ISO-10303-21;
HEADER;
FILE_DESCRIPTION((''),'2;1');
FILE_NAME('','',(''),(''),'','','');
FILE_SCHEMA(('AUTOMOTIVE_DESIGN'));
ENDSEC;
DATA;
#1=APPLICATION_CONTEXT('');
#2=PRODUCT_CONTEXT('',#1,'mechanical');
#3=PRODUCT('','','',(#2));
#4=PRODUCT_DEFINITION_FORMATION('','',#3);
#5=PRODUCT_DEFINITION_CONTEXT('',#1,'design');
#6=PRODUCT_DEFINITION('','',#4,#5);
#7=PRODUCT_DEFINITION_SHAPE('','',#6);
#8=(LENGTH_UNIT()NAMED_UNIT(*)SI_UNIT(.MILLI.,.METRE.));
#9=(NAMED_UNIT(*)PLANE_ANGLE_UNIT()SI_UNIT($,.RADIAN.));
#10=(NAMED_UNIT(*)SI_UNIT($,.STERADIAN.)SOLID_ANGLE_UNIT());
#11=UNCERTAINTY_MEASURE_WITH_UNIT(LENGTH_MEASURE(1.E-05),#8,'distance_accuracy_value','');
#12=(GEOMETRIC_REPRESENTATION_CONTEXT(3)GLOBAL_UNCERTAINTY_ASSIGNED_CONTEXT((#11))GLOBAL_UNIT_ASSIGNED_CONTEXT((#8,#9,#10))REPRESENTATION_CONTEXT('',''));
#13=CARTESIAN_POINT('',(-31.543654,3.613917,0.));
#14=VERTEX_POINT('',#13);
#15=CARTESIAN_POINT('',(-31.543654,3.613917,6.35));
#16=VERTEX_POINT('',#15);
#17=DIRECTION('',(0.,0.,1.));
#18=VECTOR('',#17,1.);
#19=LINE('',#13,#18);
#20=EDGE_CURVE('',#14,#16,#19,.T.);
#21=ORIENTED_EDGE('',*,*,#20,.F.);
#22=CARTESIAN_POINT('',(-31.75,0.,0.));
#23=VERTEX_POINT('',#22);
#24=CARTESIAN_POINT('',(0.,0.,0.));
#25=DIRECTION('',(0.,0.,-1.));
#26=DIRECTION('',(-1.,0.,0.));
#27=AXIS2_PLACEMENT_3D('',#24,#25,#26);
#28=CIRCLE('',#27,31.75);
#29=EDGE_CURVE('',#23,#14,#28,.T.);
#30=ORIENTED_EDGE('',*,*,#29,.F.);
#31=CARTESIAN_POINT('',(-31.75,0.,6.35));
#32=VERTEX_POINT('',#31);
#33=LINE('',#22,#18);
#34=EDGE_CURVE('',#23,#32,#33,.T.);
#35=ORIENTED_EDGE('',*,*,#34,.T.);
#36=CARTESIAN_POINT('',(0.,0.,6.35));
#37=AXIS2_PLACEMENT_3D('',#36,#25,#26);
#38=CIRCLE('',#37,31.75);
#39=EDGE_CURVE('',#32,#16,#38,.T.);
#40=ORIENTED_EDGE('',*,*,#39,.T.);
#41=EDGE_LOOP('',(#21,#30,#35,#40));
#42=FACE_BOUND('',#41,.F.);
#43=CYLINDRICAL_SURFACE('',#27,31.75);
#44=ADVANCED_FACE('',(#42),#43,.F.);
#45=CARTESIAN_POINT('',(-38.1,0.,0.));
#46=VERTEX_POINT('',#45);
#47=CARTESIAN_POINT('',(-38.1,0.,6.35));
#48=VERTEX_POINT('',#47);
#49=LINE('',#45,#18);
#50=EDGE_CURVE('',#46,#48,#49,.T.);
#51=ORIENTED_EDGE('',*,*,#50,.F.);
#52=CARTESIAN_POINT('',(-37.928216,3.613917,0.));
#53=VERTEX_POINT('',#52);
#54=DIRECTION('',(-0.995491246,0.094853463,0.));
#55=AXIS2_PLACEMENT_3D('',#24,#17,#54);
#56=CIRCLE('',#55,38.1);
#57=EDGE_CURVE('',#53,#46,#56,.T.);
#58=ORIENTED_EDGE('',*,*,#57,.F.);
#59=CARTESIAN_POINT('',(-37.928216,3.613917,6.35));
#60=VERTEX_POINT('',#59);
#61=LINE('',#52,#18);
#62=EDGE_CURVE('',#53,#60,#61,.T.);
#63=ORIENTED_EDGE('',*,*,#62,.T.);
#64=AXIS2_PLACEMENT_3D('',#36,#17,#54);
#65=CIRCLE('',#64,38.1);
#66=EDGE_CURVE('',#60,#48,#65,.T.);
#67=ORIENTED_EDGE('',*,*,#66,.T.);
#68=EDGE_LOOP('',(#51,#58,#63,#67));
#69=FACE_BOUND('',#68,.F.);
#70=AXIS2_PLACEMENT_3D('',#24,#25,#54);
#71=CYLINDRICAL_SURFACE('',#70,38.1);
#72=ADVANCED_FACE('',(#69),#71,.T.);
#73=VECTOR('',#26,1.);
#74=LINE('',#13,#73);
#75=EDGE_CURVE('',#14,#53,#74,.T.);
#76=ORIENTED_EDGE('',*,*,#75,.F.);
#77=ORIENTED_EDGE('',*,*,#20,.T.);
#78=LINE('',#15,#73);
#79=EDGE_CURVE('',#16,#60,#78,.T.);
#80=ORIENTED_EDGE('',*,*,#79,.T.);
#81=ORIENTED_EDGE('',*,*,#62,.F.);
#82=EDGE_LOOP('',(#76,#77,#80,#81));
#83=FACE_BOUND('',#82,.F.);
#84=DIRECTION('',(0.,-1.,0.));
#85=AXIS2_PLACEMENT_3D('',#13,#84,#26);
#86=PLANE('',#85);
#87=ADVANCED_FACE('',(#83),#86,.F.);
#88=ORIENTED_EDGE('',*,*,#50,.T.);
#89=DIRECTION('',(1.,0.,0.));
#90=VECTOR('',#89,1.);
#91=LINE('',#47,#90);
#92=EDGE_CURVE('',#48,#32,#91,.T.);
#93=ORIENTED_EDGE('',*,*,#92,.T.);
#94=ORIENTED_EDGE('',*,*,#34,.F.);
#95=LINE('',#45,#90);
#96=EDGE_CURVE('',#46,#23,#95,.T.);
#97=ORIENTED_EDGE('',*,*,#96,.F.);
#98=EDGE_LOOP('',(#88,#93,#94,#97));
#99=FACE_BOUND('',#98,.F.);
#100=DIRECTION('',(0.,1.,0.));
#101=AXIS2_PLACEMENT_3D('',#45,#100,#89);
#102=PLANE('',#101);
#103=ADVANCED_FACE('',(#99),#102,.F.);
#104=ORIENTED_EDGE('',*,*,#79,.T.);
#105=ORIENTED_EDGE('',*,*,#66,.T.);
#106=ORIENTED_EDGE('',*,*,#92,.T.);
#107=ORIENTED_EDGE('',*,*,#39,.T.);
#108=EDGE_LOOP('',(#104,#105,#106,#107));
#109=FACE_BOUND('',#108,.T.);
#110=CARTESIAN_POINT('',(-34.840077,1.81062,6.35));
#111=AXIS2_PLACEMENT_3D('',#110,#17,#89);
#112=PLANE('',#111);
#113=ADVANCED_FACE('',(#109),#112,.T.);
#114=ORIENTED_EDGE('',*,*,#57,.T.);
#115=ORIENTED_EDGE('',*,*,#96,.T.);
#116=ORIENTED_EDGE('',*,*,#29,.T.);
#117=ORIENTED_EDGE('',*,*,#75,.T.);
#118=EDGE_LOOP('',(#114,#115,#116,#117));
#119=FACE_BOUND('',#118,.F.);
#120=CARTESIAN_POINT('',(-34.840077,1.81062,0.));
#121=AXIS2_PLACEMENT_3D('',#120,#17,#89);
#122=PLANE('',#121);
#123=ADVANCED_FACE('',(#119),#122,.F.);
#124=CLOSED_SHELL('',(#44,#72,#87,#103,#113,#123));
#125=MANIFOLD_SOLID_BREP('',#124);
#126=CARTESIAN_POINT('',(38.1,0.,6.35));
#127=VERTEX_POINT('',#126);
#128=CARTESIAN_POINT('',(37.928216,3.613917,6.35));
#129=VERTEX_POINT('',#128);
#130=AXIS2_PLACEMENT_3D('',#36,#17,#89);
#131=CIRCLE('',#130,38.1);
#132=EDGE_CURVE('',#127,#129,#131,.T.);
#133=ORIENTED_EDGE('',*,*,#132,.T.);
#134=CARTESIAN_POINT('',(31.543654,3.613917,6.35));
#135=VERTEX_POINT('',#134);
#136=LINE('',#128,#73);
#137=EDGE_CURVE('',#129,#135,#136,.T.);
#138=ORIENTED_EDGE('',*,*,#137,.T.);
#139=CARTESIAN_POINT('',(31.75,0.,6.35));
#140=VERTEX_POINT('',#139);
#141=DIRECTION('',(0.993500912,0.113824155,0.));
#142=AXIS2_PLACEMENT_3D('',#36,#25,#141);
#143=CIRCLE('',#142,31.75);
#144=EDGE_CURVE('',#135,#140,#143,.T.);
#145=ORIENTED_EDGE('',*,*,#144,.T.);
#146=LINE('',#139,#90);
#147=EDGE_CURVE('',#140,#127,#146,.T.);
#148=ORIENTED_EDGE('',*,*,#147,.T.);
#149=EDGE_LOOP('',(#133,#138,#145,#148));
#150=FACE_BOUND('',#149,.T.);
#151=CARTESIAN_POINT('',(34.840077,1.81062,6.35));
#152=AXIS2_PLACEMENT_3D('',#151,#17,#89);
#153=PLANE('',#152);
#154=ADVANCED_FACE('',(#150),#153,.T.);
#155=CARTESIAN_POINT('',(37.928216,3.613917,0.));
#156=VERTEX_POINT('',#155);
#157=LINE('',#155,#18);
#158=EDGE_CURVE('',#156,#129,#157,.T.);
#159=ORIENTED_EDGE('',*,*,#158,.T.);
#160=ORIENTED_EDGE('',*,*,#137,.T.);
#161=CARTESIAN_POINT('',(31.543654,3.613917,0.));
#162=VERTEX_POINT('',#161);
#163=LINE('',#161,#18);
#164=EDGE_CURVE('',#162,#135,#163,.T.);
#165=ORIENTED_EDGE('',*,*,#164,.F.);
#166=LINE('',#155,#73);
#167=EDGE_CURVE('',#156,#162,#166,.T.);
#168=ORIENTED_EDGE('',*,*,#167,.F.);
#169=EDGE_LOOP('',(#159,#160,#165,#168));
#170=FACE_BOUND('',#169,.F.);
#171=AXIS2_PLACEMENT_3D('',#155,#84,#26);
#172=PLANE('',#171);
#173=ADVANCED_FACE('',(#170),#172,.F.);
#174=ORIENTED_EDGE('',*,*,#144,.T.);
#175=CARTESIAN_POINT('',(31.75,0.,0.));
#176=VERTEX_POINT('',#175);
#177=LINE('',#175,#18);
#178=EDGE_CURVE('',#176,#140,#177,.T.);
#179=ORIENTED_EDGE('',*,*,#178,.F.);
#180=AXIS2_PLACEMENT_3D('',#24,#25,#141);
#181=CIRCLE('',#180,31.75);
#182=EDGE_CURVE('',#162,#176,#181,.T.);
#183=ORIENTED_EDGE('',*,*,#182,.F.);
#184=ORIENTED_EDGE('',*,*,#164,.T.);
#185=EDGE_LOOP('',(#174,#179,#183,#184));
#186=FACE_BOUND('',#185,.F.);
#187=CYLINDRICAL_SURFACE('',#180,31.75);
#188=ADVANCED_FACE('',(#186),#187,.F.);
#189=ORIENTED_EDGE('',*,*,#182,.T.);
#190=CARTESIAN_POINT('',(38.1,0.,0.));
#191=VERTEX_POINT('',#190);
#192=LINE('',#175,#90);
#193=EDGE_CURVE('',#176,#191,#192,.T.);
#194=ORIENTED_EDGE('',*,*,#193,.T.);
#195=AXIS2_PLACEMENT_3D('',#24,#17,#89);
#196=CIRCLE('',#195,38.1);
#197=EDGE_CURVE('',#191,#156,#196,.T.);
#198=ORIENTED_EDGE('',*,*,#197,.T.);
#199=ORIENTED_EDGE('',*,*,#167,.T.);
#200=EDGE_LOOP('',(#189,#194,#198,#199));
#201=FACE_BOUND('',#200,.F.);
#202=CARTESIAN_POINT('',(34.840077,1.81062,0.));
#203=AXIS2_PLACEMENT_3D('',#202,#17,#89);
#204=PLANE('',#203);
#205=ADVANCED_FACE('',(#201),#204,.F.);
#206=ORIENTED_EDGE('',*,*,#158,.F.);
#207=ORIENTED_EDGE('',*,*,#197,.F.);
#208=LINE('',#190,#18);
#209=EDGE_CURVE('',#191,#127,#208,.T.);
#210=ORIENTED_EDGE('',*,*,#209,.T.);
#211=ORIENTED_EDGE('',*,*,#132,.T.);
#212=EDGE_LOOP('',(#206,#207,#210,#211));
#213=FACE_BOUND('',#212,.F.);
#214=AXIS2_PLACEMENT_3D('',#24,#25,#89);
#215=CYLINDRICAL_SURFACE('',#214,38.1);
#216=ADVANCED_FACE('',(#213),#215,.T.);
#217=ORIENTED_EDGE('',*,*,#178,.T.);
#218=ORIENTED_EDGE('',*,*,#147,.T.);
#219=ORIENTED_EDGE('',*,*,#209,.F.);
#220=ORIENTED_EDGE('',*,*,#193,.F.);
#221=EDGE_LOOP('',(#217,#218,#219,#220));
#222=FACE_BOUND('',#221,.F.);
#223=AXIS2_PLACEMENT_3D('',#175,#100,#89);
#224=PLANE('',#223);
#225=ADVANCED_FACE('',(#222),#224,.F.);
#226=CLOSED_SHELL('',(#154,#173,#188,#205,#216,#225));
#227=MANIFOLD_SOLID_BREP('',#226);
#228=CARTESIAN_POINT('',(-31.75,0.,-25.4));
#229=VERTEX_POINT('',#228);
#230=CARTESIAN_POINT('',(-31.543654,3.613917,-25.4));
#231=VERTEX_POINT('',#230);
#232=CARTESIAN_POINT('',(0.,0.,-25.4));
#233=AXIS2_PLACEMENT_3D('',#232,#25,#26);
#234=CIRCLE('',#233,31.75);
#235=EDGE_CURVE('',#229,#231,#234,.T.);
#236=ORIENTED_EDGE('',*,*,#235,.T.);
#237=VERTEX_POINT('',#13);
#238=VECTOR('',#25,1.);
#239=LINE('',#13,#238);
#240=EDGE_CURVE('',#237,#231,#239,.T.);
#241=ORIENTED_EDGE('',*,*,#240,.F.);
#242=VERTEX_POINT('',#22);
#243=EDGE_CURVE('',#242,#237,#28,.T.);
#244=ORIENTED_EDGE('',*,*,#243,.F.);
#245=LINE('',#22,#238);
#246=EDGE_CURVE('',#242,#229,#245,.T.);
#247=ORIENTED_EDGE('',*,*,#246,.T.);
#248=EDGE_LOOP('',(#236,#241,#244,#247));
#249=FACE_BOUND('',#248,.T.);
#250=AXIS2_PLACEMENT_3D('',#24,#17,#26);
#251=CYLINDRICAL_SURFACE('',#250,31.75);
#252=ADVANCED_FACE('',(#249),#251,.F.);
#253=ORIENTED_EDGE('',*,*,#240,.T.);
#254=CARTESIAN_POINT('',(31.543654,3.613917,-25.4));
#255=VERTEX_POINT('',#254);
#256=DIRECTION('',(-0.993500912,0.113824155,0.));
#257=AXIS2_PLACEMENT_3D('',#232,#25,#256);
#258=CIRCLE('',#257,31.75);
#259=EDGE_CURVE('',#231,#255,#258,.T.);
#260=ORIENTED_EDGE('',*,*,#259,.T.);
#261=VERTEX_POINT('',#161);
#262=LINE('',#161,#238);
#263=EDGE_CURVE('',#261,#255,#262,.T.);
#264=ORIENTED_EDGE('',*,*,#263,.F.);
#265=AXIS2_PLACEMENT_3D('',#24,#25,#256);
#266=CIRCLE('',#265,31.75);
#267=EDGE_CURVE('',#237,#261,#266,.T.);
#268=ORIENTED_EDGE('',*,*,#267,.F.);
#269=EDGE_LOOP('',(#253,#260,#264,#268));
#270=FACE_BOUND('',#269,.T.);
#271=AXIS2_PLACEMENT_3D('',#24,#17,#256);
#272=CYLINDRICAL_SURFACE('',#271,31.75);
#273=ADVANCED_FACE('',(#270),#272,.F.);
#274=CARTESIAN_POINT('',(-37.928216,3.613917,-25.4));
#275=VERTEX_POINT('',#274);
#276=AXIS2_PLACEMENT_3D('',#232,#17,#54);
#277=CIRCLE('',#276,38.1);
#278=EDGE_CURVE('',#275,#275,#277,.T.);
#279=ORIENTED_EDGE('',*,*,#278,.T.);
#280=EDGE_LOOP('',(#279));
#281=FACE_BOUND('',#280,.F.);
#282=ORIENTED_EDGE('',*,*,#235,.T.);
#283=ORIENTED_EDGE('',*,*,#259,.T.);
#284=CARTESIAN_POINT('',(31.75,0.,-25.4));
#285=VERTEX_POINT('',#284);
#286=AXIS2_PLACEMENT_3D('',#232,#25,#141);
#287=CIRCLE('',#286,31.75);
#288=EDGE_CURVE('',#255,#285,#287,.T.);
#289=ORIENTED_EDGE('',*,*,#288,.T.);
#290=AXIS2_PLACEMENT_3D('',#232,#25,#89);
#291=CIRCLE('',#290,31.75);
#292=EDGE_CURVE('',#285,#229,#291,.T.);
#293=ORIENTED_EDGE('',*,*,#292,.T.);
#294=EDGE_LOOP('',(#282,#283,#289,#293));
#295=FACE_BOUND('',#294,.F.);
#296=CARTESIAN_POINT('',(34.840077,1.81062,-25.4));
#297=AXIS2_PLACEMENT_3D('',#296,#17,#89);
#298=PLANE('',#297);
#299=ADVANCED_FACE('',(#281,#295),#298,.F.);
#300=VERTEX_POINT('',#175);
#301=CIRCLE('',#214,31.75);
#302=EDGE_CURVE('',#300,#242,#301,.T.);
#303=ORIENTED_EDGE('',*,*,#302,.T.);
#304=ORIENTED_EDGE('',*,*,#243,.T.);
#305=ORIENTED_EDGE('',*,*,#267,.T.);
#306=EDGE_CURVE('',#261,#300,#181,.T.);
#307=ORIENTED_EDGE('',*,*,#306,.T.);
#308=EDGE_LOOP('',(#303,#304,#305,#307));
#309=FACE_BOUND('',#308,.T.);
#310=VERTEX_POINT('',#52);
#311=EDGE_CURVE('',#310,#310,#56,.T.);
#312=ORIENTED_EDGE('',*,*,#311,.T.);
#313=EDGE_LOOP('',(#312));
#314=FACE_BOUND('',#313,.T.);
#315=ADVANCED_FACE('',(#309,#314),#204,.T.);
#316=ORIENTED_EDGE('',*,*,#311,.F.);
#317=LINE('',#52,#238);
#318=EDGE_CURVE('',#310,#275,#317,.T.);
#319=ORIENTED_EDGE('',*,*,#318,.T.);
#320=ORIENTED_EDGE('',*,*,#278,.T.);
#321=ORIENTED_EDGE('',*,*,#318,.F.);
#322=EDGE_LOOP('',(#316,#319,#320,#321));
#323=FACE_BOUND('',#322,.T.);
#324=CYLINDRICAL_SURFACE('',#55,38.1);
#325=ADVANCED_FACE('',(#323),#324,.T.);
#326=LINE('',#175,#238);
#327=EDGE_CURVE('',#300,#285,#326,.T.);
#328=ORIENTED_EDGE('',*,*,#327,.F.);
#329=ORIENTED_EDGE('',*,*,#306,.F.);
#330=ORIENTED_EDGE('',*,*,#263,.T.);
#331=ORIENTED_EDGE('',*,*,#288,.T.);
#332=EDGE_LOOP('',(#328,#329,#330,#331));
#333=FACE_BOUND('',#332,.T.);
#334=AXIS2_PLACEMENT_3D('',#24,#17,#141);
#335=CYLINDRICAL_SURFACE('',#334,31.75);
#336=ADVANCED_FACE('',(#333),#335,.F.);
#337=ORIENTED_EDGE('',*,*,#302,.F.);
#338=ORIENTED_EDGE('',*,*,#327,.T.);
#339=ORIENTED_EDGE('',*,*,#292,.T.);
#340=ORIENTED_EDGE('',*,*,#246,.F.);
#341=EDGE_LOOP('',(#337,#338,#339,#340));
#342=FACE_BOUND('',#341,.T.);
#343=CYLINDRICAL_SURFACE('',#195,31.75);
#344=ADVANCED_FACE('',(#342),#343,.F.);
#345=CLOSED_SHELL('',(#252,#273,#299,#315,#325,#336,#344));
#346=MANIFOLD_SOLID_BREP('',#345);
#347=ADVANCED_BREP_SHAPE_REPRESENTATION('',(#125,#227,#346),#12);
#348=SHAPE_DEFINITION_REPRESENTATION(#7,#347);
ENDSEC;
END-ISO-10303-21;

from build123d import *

# Parameters (mm, degrees)
F1_DEPTH = 6.35
F2_DEPTH = 25.4


with BuildPart() as f1:
    # F0 (on Top) → F1 (new body)
    with BuildSketch(Plane.XY):
        with BuildLine():
            Line((31.75, 0), (38.1, 0))
            ThreePointArc((38.1, 0), (38.0570298857, 1.8089986952), (37.9282164683, 3.6139169242))
            Line((37.9282164683, 3.6139169242), (31.5436539492, 3.6139169242))
            ThreePointArc((31.5436539492, 3.6139169242), (31.6983715109, 1.8099015324), (31.75, 0))
        make_face()
    extrude(amount=F1_DEPTH)


with BuildPart() as f1b:
    # F0 (on Top) → F1, piece 2 (new body)
    with BuildSketch(Plane.XY):
        with BuildLine():
            ThreePointArc((-37.9282164683, 3.6139169242), (-38.0570298857, 1.8089986952), (-38.1, 0))
            Line((-38.1, 0), (-31.75, 0))
            ThreePointArc((-31.75, 0), (-31.6983715109, 1.8099015324), (-31.5436539492, 3.6139169242))
            Line((-31.5436539492, 3.6139169242), (-37.9282164683, 3.6139169242))
        make_face()
    extrude(amount=F1_DEPTH)


with BuildPart() as f2:
    # F0 (on Top) → F2 (new body)
    with BuildSketch(Plane.XY):
        with BuildLine():
            Line((31.75, 0), (38.1, 0))
            ThreePointArc((38.1, 0), (38.0570298857, 1.8089986952), (37.9282164683, 3.6139169242))
            Line((37.9282164683, 3.6139169242), (31.5436539492, 3.6139169242))
            ThreePointArc((31.5436539492, 3.6139169242), (31.6983715109, 1.8099015324), (31.75, 0))
        make_face()
        with BuildLine():
            ThreePointArc((-38.1, 0), (0, -38.1), (38.1, 0))
            Line((38.1, 0), (31.75, 0))
            ThreePointArc((31.75, 0), (0, -31.75), (-31.75, 0))
            Line((-31.75, 0), (-38.1, 0))
        make_face()
        with BuildLine():
            Line((31.5436539492, 3.6139169242), (37.9282164683, 3.6139169242))
            ThreePointArc((37.9282164683, 3.6139169242), (0, 38.1), (-37.9282164683, 3.6139169242))
            Line((-37.9282164683, 3.6139169242), (-31.5436539492, 3.6139169242))
            ThreePointArc((-31.5436539492, 3.6139169242), (0, 31.75), (31.5436539492, 3.6139169242))
        make_face()
        with BuildLine():
            ThreePointArc((-37.9282164683, 3.6139169242), (-38.0570298857, 1.8089986952), (-38.1, 0))
            Line((-38.1, 0), (-31.75, 0))
            ThreePointArc((-31.75, 0), (-31.6983715109, 1.8099015324), (-31.5436539492, 3.6139169242))
            Line((-31.5436539492, 3.6139169242), (-37.9282164683, 3.6139169242))
        make_face()
    extrude(amount=-F2_DEPTH)


solid = Compound([f1.part, f1b.part, f2.part])
